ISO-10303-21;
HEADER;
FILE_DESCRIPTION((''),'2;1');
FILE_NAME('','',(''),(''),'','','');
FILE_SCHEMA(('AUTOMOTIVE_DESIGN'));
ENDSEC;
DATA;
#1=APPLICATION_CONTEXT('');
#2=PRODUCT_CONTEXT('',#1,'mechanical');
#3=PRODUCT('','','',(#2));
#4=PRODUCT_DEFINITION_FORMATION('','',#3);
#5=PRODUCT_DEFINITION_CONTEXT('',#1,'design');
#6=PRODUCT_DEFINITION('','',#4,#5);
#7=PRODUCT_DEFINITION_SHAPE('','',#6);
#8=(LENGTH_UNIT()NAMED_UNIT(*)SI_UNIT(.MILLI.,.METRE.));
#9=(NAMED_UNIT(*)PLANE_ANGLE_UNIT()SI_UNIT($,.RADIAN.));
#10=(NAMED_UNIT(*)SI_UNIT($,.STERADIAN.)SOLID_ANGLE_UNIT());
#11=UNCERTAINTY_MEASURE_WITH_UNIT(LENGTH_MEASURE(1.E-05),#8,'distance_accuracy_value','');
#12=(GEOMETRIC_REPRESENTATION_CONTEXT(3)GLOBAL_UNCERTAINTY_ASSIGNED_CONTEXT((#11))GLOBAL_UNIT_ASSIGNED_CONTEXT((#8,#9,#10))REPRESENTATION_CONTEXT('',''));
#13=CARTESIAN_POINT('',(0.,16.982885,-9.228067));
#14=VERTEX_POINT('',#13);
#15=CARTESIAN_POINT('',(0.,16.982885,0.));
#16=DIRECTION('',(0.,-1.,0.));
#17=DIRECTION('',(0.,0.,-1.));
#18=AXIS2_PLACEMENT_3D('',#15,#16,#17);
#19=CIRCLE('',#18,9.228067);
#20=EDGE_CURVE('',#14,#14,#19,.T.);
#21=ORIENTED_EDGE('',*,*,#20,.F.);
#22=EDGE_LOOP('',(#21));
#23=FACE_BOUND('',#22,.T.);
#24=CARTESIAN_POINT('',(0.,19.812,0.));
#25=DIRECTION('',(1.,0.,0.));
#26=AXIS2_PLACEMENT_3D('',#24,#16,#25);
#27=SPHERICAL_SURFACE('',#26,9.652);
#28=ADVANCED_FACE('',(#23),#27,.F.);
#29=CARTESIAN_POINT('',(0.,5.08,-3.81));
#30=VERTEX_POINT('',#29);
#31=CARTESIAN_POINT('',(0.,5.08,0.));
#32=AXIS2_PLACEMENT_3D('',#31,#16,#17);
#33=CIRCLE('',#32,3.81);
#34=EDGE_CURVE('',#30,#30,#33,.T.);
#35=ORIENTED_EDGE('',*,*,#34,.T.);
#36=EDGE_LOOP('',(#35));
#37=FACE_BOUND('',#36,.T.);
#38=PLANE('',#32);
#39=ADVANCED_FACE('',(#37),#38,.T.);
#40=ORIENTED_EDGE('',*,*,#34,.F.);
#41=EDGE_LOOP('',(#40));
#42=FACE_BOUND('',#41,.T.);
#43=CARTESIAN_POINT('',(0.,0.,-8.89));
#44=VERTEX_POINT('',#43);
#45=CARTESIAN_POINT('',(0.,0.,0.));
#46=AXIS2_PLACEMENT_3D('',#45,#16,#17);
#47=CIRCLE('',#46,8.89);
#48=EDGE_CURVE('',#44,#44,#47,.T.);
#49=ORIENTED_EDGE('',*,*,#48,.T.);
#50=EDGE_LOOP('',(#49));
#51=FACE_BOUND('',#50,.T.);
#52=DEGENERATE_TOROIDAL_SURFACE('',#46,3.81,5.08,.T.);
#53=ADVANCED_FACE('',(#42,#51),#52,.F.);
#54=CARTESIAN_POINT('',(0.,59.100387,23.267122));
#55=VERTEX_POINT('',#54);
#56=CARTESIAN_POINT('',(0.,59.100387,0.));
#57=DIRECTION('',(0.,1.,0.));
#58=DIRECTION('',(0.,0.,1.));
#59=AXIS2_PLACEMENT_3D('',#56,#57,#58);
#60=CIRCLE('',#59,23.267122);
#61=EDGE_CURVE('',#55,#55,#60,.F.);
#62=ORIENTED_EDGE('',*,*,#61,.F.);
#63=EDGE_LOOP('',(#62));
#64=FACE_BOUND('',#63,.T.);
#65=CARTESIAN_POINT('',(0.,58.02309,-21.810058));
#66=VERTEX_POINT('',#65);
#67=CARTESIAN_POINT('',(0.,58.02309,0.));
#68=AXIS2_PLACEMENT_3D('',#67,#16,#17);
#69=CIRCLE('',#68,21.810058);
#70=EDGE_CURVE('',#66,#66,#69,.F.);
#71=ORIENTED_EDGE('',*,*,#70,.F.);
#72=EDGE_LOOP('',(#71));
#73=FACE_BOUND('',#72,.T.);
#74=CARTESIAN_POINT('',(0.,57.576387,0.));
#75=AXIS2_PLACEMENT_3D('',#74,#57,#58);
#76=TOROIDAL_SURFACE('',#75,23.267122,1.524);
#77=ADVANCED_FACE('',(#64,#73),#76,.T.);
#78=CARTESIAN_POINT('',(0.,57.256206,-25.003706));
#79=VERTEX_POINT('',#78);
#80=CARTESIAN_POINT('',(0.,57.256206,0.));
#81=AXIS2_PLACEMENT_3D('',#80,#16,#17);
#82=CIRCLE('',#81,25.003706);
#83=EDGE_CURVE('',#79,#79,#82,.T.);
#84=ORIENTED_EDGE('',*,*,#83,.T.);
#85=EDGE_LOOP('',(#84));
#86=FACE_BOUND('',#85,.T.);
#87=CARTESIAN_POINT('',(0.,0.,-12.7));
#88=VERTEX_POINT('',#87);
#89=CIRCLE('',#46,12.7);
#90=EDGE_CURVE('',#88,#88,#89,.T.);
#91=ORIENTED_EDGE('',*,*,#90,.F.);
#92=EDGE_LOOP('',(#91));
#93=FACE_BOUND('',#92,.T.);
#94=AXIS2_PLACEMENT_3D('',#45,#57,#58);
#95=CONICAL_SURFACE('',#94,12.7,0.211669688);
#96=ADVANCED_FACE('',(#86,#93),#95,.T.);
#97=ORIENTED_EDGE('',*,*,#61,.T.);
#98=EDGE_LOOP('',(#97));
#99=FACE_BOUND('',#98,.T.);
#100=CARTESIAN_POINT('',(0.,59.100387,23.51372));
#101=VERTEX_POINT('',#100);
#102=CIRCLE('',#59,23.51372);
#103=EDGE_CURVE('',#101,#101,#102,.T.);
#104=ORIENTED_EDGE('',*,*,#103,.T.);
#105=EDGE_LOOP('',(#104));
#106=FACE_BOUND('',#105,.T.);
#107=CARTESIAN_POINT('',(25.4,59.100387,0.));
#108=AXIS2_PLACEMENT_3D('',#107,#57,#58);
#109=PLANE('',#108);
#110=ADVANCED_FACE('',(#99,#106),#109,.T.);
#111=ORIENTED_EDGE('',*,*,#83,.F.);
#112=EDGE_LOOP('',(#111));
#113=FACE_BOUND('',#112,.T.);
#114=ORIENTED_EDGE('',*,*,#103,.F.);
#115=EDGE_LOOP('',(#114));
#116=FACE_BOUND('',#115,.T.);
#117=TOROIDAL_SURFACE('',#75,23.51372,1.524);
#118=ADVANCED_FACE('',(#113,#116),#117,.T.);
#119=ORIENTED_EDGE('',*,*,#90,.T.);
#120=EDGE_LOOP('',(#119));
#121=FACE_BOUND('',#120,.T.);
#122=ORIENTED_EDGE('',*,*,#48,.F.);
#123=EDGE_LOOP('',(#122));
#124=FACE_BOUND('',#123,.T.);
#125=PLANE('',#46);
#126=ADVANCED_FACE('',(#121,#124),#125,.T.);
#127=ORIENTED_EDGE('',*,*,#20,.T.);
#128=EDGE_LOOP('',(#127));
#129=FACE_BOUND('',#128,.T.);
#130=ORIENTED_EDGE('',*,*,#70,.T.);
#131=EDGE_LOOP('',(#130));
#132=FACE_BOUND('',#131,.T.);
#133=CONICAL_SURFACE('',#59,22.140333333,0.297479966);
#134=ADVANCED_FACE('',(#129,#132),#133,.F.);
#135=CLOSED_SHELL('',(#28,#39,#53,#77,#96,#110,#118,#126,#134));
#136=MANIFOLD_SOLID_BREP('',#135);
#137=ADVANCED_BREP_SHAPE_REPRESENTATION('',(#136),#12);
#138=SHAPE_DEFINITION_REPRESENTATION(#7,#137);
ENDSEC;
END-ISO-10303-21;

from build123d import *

# Parameters (mm, degrees)
FILLET1_R          = 1.524
SKETCH4_R          = 8.89
CUT_EXTRUDE1_DEPTH = 5.08
FILLET2_R          = 5.08


with BuildPart() as part:
    # Sketch3 → Revolve1 (revolve)
    with BuildSketch(Plane.XY, mode=Mode.PRIVATE) as revolve1_sk:
        with BuildLine():
            Line((0, 0), (12.7, 0))
            Line((12.7, 0), (25.4, 59.10038719))
            Line((25.4, 59.10038719), (22.140333333, 59.10038719))
            Line((22.140333333, 59.10038719), (9.228066554, 16.982885))
            ThreePointArc((9.228066554, 16.982885), (5.738226469, 12.050952327), (0, 10.16))
            Line((0, 10.16), (0, 0))
        make_face()
    revolve(revolve1_sk.sketch.rotate(Axis((0, 0, 0), (0, 1, 0)), 90), axis=Axis((0, 0, 0), (0, 1, 0)))

    # Fillet1
    fillet1_edges = [part.edges().sort_by_distance(p)[0] for p in [
        (0, 59.10038719, 25.4),
        (0, 59.10038719, 22.140333333),
    ]]
    fillet(fillet1_edges, radius=FILLET1_R)

    # Sketch4 → Cut-Extrude1 (cut)
    with BuildSketch(Plane.XZ):
        with Locations(Location((0, 0, 0), (0, 0, 270))):
            Circle(SKETCH4_R)
    extrude(amount=-CUT_EXTRUDE1_DEPTH, mode=Mode.SUBTRACT)

    # Fillet2
    fillet2_edges = [part.edges().sort_by_distance(p)[0] for p in [
        (0, 5.08, 8.89),
    ]]
    fillet(fillet2_edges, radius=FILLET2_R - 0.0001)  # a hair under: the kernel refuses the full size


solid = part.part
